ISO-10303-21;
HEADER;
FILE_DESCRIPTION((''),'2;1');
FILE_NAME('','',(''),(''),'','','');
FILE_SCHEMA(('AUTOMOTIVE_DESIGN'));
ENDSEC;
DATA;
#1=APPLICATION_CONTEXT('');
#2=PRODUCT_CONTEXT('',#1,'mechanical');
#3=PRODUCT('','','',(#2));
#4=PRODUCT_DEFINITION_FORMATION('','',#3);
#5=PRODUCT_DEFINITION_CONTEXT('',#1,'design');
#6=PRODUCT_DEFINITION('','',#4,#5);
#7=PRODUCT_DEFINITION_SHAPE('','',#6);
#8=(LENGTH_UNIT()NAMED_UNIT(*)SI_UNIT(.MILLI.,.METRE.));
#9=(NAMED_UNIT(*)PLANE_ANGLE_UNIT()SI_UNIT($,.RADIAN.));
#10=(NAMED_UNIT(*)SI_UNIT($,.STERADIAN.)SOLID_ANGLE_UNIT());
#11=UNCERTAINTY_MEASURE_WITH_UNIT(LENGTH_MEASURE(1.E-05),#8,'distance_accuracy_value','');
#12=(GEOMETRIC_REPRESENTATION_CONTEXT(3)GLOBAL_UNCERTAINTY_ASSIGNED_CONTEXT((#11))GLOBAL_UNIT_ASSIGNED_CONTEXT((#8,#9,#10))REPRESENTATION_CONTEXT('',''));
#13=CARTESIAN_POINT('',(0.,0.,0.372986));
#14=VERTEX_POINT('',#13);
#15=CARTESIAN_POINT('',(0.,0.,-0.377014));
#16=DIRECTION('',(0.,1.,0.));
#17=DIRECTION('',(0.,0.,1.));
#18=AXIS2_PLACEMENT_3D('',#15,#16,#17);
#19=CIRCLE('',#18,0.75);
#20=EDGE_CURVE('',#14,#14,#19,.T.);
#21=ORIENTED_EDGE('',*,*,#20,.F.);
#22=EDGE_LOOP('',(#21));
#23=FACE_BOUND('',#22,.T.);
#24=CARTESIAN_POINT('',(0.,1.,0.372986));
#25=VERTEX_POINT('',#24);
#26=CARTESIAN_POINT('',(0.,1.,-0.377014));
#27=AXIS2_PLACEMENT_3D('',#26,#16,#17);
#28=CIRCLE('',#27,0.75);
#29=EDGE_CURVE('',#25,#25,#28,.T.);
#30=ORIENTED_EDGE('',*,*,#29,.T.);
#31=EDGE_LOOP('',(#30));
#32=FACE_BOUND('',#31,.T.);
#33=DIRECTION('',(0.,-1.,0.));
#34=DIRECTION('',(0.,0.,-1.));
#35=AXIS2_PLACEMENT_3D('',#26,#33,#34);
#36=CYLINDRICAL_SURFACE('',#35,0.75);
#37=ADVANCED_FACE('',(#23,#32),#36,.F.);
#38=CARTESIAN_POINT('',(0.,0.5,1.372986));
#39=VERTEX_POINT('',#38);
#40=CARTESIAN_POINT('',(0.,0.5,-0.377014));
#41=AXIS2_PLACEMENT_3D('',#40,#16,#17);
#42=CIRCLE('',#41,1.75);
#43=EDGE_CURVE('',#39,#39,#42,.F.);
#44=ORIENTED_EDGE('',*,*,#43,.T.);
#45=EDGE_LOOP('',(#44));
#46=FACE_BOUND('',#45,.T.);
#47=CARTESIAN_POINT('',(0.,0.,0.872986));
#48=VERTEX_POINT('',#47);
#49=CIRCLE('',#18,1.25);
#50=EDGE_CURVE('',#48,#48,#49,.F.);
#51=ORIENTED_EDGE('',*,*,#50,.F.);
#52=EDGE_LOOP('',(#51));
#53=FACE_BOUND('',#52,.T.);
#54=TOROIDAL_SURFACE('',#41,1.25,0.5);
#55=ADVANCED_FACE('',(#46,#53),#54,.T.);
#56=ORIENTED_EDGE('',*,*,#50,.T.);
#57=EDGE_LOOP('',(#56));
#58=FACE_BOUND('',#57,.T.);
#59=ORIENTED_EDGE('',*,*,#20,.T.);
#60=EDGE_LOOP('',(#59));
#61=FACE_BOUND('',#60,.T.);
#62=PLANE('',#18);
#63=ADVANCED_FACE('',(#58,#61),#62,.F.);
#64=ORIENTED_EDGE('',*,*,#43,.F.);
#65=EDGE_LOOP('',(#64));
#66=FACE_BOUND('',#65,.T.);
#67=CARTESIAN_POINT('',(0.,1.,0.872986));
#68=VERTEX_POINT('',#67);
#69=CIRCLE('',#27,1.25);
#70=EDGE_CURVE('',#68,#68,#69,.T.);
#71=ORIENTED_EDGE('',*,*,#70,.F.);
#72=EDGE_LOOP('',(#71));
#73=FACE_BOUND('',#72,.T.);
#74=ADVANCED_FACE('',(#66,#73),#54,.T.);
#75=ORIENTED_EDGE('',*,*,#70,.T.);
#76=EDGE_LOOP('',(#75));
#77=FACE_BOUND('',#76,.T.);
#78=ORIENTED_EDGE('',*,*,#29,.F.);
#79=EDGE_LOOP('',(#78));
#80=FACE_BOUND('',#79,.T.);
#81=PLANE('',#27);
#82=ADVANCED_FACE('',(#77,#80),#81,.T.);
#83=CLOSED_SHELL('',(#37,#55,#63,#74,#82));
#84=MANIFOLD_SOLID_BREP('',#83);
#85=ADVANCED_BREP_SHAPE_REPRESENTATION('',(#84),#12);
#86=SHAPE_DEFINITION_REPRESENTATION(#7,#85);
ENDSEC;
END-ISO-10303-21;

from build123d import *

# Parameters (mm, degrees)
SKETCH1_R           = 1.75
SKETCH1_R_2         = 0.75
BOSS_EXTRUDE1_DEPTH = 1
FILLET1_R           = 0.5


with BuildPart() as part:
    # Sketch1 → Boss-Extrude1 (new body)
    with BuildSketch(Plane(origin=(0, 0, 0), x_dir=(1, 0, 0), z_dir=(0, 1, 0))):
        with Locations(Location((0, 0.37701436, 0), (0, 0, 270))):
            Circle(SKETCH1_R)
        with Locations(Location((0, 0.37701436, 0), (0, 0, 270))):
            Circle(SKETCH1_R_2, mode=Mode.SUBTRACT)
    extrude(amount=BOSS_EXTRUDE1_DEPTH)

    # Fillet1
    fillet1_edges = [part.edges().sort_by_distance(p)[0] for p in [
        (0, 0, -2.12701436),
        (0, 1, -2.12701436),
    ]]
    fillet(fillet1_edges, radius=FILLET1_R - 0.0001)  # a hair under: the kernel refuses the full size


solid = part.part
